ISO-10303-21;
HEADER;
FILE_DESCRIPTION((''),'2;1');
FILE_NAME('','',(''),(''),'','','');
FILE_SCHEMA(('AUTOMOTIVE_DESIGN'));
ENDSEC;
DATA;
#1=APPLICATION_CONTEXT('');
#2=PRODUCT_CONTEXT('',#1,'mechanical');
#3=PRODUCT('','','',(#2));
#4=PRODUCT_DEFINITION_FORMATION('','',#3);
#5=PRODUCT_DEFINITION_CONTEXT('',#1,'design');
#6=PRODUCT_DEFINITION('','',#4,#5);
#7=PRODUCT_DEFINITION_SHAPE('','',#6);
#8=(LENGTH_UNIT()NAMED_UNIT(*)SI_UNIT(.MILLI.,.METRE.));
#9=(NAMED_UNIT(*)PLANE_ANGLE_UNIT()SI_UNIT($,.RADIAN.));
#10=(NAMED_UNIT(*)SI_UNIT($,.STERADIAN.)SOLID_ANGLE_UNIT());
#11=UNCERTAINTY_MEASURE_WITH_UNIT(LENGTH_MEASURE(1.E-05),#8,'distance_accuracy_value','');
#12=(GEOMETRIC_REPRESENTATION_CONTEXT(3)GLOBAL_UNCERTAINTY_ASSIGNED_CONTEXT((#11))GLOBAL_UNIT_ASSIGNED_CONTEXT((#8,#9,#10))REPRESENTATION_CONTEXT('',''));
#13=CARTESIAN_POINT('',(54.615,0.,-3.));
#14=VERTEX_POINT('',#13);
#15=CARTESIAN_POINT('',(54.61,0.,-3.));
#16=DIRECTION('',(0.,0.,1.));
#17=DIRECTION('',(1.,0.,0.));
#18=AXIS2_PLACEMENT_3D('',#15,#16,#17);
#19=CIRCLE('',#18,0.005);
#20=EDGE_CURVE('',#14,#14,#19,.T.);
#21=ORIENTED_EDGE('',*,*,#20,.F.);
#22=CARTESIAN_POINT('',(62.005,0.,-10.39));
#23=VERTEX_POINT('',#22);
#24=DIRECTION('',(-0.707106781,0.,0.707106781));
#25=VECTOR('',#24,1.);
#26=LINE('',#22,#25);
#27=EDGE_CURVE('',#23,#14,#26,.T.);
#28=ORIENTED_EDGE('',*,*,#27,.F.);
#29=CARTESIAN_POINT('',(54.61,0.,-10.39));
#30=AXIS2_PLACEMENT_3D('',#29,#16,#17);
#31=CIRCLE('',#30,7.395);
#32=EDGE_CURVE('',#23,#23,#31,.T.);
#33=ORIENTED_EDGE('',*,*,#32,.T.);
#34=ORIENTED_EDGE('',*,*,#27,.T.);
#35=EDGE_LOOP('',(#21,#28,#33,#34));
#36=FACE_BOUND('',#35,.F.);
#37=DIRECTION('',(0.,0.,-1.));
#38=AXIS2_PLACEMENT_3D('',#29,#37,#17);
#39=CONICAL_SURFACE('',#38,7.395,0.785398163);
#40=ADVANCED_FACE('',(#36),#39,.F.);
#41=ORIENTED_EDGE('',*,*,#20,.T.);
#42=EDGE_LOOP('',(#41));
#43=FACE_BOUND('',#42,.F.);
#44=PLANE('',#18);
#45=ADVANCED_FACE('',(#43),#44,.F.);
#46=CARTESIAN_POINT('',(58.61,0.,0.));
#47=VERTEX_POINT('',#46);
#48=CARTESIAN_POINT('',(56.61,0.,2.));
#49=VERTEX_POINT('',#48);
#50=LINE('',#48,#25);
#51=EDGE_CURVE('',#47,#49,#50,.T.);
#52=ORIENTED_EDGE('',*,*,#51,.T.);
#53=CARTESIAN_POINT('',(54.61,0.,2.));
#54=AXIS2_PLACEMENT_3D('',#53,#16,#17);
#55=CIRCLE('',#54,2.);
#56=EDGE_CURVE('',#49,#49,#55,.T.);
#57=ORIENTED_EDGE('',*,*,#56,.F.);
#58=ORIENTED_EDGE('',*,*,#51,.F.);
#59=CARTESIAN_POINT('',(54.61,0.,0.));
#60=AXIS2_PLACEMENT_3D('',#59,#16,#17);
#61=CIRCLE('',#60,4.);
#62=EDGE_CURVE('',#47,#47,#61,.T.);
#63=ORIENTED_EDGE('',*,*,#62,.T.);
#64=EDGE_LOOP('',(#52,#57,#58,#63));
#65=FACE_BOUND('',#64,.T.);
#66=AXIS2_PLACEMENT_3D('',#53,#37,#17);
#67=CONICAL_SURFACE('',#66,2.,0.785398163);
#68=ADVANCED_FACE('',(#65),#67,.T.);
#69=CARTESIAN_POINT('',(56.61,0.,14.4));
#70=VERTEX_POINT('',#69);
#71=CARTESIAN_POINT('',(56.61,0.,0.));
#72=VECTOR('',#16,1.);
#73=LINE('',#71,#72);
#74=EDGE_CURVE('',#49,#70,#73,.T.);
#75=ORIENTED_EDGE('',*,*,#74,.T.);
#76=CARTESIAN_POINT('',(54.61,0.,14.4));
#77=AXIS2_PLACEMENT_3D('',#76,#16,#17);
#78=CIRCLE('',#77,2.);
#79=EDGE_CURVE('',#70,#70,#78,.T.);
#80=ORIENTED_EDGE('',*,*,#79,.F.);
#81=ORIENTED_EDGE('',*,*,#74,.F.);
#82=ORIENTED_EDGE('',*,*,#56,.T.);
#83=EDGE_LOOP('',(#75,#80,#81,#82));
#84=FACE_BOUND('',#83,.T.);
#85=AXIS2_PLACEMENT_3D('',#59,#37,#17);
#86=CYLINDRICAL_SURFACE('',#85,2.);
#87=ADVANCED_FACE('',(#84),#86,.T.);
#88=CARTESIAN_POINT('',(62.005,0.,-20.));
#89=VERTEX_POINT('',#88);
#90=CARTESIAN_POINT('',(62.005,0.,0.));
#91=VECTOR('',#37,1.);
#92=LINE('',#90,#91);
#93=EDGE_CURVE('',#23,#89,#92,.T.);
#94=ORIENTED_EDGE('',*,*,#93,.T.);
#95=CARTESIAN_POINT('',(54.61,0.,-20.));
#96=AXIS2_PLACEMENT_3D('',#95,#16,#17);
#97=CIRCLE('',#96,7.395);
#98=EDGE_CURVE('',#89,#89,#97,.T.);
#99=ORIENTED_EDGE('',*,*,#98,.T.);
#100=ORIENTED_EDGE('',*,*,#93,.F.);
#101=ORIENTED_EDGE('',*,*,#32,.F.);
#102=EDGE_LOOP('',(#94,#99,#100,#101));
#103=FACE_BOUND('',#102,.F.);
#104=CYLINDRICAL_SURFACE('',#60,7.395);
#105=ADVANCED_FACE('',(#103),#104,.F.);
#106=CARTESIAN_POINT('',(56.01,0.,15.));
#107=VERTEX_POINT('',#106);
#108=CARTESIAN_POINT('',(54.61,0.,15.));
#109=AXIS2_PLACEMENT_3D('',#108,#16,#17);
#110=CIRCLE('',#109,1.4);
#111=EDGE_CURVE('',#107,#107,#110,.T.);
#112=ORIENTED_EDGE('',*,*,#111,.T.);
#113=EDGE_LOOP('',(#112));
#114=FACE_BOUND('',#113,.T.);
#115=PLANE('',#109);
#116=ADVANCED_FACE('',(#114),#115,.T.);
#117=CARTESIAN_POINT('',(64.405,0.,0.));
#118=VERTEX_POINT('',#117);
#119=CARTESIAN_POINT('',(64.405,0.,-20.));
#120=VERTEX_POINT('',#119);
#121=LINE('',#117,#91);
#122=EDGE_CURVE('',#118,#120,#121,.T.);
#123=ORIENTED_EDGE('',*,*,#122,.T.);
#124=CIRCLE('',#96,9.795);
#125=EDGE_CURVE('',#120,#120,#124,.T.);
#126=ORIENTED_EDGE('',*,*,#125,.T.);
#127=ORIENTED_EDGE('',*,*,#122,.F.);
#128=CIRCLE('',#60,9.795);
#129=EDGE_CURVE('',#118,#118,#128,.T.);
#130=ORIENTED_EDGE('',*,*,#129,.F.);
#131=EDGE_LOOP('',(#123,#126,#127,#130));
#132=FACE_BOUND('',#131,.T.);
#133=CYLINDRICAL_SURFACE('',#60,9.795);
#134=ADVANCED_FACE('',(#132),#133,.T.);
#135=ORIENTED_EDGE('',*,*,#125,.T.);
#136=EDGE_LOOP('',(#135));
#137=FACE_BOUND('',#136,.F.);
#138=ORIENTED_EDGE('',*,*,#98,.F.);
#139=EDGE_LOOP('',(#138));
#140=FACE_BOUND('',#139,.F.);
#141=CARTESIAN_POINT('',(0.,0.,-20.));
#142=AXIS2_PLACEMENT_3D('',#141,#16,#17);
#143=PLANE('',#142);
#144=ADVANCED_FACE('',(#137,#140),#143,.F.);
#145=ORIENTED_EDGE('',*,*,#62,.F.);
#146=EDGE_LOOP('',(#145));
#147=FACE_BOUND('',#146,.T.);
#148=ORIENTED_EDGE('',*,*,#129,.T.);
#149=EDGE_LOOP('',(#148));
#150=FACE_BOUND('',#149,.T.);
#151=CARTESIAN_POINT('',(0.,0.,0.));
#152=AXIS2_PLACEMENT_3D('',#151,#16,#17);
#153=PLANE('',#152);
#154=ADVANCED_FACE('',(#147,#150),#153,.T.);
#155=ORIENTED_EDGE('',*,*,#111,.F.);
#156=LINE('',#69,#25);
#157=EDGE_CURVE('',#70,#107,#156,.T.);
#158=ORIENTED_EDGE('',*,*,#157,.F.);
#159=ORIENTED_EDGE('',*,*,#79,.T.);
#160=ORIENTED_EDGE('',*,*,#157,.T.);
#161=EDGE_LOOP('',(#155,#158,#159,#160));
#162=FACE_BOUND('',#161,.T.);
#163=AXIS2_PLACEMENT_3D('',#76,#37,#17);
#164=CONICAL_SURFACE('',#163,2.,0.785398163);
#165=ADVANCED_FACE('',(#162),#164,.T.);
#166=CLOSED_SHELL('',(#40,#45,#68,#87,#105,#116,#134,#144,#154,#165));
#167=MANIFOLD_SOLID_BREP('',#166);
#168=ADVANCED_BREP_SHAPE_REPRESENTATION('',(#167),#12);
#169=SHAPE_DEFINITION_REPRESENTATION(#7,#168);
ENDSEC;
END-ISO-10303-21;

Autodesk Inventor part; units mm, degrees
ref_plane "YZ Plane" through (0, 0, 0) normal (1, 0, 0) x (0, 1, 0)
ref_plane "XZ Plane" through (0, 0, 0) normal (0, 1, 0) x (-1, 0, 0)
ref_plane "XY Plane" through (0, 0, 0) normal (0, 0, 1) x (1, 0, 0)
sketch "Sketch1" plane through (0, 0, 0) normal (0, 0, 1) x (1, 0, 0)
  circle A0 centre (54.61, 0) radius 7.395 projected
  circle A1 centre (54.61, 0) radius 9.795
  point P0 (0, 0)
  dimension "d0" = 2.4
extrude "Extrusion1" add sketch "Sketch1" against normal blind 20
sketch "Sketch2" plane through (54.61, 0, 0) normal (0, 0, 1) x (1, 0, 0)
  circle A0 centre (0, 0) radius 7.395 projected
  circle A1 centre (0, 0) radius 9.795 projected
  circle A2 centre (0, 0) radius 2 projected
  point P0 (-54.61, 0)
extrude "Extrusion2" add sketch "Sketch2" against normal blind 3 contours A0 | A1 | A2
sketch "Sketch3" plane through (54.61, 0, 0) normal (0, 0, 1) x (1, 0, 0)
  circle A0 centre (0, 0) radius 2 projected
  point P0 (-54.61, 0)
extrude "Extrusion3" add sketch "Sketch3" along normal blind 15
chamfer "Chamfer1" distance 2 angle 45 1 edges at (52.61, 0, 0)
chamfer "Chamfer2" distance 0.6 angle 45 1 edges at (52.61, 0, 15)
chamfer "Chamfer3" distance 7.39 angle 45 1 edges at (47.215, 0, -3)
properties part number "Transmission_Mount_Tester"
